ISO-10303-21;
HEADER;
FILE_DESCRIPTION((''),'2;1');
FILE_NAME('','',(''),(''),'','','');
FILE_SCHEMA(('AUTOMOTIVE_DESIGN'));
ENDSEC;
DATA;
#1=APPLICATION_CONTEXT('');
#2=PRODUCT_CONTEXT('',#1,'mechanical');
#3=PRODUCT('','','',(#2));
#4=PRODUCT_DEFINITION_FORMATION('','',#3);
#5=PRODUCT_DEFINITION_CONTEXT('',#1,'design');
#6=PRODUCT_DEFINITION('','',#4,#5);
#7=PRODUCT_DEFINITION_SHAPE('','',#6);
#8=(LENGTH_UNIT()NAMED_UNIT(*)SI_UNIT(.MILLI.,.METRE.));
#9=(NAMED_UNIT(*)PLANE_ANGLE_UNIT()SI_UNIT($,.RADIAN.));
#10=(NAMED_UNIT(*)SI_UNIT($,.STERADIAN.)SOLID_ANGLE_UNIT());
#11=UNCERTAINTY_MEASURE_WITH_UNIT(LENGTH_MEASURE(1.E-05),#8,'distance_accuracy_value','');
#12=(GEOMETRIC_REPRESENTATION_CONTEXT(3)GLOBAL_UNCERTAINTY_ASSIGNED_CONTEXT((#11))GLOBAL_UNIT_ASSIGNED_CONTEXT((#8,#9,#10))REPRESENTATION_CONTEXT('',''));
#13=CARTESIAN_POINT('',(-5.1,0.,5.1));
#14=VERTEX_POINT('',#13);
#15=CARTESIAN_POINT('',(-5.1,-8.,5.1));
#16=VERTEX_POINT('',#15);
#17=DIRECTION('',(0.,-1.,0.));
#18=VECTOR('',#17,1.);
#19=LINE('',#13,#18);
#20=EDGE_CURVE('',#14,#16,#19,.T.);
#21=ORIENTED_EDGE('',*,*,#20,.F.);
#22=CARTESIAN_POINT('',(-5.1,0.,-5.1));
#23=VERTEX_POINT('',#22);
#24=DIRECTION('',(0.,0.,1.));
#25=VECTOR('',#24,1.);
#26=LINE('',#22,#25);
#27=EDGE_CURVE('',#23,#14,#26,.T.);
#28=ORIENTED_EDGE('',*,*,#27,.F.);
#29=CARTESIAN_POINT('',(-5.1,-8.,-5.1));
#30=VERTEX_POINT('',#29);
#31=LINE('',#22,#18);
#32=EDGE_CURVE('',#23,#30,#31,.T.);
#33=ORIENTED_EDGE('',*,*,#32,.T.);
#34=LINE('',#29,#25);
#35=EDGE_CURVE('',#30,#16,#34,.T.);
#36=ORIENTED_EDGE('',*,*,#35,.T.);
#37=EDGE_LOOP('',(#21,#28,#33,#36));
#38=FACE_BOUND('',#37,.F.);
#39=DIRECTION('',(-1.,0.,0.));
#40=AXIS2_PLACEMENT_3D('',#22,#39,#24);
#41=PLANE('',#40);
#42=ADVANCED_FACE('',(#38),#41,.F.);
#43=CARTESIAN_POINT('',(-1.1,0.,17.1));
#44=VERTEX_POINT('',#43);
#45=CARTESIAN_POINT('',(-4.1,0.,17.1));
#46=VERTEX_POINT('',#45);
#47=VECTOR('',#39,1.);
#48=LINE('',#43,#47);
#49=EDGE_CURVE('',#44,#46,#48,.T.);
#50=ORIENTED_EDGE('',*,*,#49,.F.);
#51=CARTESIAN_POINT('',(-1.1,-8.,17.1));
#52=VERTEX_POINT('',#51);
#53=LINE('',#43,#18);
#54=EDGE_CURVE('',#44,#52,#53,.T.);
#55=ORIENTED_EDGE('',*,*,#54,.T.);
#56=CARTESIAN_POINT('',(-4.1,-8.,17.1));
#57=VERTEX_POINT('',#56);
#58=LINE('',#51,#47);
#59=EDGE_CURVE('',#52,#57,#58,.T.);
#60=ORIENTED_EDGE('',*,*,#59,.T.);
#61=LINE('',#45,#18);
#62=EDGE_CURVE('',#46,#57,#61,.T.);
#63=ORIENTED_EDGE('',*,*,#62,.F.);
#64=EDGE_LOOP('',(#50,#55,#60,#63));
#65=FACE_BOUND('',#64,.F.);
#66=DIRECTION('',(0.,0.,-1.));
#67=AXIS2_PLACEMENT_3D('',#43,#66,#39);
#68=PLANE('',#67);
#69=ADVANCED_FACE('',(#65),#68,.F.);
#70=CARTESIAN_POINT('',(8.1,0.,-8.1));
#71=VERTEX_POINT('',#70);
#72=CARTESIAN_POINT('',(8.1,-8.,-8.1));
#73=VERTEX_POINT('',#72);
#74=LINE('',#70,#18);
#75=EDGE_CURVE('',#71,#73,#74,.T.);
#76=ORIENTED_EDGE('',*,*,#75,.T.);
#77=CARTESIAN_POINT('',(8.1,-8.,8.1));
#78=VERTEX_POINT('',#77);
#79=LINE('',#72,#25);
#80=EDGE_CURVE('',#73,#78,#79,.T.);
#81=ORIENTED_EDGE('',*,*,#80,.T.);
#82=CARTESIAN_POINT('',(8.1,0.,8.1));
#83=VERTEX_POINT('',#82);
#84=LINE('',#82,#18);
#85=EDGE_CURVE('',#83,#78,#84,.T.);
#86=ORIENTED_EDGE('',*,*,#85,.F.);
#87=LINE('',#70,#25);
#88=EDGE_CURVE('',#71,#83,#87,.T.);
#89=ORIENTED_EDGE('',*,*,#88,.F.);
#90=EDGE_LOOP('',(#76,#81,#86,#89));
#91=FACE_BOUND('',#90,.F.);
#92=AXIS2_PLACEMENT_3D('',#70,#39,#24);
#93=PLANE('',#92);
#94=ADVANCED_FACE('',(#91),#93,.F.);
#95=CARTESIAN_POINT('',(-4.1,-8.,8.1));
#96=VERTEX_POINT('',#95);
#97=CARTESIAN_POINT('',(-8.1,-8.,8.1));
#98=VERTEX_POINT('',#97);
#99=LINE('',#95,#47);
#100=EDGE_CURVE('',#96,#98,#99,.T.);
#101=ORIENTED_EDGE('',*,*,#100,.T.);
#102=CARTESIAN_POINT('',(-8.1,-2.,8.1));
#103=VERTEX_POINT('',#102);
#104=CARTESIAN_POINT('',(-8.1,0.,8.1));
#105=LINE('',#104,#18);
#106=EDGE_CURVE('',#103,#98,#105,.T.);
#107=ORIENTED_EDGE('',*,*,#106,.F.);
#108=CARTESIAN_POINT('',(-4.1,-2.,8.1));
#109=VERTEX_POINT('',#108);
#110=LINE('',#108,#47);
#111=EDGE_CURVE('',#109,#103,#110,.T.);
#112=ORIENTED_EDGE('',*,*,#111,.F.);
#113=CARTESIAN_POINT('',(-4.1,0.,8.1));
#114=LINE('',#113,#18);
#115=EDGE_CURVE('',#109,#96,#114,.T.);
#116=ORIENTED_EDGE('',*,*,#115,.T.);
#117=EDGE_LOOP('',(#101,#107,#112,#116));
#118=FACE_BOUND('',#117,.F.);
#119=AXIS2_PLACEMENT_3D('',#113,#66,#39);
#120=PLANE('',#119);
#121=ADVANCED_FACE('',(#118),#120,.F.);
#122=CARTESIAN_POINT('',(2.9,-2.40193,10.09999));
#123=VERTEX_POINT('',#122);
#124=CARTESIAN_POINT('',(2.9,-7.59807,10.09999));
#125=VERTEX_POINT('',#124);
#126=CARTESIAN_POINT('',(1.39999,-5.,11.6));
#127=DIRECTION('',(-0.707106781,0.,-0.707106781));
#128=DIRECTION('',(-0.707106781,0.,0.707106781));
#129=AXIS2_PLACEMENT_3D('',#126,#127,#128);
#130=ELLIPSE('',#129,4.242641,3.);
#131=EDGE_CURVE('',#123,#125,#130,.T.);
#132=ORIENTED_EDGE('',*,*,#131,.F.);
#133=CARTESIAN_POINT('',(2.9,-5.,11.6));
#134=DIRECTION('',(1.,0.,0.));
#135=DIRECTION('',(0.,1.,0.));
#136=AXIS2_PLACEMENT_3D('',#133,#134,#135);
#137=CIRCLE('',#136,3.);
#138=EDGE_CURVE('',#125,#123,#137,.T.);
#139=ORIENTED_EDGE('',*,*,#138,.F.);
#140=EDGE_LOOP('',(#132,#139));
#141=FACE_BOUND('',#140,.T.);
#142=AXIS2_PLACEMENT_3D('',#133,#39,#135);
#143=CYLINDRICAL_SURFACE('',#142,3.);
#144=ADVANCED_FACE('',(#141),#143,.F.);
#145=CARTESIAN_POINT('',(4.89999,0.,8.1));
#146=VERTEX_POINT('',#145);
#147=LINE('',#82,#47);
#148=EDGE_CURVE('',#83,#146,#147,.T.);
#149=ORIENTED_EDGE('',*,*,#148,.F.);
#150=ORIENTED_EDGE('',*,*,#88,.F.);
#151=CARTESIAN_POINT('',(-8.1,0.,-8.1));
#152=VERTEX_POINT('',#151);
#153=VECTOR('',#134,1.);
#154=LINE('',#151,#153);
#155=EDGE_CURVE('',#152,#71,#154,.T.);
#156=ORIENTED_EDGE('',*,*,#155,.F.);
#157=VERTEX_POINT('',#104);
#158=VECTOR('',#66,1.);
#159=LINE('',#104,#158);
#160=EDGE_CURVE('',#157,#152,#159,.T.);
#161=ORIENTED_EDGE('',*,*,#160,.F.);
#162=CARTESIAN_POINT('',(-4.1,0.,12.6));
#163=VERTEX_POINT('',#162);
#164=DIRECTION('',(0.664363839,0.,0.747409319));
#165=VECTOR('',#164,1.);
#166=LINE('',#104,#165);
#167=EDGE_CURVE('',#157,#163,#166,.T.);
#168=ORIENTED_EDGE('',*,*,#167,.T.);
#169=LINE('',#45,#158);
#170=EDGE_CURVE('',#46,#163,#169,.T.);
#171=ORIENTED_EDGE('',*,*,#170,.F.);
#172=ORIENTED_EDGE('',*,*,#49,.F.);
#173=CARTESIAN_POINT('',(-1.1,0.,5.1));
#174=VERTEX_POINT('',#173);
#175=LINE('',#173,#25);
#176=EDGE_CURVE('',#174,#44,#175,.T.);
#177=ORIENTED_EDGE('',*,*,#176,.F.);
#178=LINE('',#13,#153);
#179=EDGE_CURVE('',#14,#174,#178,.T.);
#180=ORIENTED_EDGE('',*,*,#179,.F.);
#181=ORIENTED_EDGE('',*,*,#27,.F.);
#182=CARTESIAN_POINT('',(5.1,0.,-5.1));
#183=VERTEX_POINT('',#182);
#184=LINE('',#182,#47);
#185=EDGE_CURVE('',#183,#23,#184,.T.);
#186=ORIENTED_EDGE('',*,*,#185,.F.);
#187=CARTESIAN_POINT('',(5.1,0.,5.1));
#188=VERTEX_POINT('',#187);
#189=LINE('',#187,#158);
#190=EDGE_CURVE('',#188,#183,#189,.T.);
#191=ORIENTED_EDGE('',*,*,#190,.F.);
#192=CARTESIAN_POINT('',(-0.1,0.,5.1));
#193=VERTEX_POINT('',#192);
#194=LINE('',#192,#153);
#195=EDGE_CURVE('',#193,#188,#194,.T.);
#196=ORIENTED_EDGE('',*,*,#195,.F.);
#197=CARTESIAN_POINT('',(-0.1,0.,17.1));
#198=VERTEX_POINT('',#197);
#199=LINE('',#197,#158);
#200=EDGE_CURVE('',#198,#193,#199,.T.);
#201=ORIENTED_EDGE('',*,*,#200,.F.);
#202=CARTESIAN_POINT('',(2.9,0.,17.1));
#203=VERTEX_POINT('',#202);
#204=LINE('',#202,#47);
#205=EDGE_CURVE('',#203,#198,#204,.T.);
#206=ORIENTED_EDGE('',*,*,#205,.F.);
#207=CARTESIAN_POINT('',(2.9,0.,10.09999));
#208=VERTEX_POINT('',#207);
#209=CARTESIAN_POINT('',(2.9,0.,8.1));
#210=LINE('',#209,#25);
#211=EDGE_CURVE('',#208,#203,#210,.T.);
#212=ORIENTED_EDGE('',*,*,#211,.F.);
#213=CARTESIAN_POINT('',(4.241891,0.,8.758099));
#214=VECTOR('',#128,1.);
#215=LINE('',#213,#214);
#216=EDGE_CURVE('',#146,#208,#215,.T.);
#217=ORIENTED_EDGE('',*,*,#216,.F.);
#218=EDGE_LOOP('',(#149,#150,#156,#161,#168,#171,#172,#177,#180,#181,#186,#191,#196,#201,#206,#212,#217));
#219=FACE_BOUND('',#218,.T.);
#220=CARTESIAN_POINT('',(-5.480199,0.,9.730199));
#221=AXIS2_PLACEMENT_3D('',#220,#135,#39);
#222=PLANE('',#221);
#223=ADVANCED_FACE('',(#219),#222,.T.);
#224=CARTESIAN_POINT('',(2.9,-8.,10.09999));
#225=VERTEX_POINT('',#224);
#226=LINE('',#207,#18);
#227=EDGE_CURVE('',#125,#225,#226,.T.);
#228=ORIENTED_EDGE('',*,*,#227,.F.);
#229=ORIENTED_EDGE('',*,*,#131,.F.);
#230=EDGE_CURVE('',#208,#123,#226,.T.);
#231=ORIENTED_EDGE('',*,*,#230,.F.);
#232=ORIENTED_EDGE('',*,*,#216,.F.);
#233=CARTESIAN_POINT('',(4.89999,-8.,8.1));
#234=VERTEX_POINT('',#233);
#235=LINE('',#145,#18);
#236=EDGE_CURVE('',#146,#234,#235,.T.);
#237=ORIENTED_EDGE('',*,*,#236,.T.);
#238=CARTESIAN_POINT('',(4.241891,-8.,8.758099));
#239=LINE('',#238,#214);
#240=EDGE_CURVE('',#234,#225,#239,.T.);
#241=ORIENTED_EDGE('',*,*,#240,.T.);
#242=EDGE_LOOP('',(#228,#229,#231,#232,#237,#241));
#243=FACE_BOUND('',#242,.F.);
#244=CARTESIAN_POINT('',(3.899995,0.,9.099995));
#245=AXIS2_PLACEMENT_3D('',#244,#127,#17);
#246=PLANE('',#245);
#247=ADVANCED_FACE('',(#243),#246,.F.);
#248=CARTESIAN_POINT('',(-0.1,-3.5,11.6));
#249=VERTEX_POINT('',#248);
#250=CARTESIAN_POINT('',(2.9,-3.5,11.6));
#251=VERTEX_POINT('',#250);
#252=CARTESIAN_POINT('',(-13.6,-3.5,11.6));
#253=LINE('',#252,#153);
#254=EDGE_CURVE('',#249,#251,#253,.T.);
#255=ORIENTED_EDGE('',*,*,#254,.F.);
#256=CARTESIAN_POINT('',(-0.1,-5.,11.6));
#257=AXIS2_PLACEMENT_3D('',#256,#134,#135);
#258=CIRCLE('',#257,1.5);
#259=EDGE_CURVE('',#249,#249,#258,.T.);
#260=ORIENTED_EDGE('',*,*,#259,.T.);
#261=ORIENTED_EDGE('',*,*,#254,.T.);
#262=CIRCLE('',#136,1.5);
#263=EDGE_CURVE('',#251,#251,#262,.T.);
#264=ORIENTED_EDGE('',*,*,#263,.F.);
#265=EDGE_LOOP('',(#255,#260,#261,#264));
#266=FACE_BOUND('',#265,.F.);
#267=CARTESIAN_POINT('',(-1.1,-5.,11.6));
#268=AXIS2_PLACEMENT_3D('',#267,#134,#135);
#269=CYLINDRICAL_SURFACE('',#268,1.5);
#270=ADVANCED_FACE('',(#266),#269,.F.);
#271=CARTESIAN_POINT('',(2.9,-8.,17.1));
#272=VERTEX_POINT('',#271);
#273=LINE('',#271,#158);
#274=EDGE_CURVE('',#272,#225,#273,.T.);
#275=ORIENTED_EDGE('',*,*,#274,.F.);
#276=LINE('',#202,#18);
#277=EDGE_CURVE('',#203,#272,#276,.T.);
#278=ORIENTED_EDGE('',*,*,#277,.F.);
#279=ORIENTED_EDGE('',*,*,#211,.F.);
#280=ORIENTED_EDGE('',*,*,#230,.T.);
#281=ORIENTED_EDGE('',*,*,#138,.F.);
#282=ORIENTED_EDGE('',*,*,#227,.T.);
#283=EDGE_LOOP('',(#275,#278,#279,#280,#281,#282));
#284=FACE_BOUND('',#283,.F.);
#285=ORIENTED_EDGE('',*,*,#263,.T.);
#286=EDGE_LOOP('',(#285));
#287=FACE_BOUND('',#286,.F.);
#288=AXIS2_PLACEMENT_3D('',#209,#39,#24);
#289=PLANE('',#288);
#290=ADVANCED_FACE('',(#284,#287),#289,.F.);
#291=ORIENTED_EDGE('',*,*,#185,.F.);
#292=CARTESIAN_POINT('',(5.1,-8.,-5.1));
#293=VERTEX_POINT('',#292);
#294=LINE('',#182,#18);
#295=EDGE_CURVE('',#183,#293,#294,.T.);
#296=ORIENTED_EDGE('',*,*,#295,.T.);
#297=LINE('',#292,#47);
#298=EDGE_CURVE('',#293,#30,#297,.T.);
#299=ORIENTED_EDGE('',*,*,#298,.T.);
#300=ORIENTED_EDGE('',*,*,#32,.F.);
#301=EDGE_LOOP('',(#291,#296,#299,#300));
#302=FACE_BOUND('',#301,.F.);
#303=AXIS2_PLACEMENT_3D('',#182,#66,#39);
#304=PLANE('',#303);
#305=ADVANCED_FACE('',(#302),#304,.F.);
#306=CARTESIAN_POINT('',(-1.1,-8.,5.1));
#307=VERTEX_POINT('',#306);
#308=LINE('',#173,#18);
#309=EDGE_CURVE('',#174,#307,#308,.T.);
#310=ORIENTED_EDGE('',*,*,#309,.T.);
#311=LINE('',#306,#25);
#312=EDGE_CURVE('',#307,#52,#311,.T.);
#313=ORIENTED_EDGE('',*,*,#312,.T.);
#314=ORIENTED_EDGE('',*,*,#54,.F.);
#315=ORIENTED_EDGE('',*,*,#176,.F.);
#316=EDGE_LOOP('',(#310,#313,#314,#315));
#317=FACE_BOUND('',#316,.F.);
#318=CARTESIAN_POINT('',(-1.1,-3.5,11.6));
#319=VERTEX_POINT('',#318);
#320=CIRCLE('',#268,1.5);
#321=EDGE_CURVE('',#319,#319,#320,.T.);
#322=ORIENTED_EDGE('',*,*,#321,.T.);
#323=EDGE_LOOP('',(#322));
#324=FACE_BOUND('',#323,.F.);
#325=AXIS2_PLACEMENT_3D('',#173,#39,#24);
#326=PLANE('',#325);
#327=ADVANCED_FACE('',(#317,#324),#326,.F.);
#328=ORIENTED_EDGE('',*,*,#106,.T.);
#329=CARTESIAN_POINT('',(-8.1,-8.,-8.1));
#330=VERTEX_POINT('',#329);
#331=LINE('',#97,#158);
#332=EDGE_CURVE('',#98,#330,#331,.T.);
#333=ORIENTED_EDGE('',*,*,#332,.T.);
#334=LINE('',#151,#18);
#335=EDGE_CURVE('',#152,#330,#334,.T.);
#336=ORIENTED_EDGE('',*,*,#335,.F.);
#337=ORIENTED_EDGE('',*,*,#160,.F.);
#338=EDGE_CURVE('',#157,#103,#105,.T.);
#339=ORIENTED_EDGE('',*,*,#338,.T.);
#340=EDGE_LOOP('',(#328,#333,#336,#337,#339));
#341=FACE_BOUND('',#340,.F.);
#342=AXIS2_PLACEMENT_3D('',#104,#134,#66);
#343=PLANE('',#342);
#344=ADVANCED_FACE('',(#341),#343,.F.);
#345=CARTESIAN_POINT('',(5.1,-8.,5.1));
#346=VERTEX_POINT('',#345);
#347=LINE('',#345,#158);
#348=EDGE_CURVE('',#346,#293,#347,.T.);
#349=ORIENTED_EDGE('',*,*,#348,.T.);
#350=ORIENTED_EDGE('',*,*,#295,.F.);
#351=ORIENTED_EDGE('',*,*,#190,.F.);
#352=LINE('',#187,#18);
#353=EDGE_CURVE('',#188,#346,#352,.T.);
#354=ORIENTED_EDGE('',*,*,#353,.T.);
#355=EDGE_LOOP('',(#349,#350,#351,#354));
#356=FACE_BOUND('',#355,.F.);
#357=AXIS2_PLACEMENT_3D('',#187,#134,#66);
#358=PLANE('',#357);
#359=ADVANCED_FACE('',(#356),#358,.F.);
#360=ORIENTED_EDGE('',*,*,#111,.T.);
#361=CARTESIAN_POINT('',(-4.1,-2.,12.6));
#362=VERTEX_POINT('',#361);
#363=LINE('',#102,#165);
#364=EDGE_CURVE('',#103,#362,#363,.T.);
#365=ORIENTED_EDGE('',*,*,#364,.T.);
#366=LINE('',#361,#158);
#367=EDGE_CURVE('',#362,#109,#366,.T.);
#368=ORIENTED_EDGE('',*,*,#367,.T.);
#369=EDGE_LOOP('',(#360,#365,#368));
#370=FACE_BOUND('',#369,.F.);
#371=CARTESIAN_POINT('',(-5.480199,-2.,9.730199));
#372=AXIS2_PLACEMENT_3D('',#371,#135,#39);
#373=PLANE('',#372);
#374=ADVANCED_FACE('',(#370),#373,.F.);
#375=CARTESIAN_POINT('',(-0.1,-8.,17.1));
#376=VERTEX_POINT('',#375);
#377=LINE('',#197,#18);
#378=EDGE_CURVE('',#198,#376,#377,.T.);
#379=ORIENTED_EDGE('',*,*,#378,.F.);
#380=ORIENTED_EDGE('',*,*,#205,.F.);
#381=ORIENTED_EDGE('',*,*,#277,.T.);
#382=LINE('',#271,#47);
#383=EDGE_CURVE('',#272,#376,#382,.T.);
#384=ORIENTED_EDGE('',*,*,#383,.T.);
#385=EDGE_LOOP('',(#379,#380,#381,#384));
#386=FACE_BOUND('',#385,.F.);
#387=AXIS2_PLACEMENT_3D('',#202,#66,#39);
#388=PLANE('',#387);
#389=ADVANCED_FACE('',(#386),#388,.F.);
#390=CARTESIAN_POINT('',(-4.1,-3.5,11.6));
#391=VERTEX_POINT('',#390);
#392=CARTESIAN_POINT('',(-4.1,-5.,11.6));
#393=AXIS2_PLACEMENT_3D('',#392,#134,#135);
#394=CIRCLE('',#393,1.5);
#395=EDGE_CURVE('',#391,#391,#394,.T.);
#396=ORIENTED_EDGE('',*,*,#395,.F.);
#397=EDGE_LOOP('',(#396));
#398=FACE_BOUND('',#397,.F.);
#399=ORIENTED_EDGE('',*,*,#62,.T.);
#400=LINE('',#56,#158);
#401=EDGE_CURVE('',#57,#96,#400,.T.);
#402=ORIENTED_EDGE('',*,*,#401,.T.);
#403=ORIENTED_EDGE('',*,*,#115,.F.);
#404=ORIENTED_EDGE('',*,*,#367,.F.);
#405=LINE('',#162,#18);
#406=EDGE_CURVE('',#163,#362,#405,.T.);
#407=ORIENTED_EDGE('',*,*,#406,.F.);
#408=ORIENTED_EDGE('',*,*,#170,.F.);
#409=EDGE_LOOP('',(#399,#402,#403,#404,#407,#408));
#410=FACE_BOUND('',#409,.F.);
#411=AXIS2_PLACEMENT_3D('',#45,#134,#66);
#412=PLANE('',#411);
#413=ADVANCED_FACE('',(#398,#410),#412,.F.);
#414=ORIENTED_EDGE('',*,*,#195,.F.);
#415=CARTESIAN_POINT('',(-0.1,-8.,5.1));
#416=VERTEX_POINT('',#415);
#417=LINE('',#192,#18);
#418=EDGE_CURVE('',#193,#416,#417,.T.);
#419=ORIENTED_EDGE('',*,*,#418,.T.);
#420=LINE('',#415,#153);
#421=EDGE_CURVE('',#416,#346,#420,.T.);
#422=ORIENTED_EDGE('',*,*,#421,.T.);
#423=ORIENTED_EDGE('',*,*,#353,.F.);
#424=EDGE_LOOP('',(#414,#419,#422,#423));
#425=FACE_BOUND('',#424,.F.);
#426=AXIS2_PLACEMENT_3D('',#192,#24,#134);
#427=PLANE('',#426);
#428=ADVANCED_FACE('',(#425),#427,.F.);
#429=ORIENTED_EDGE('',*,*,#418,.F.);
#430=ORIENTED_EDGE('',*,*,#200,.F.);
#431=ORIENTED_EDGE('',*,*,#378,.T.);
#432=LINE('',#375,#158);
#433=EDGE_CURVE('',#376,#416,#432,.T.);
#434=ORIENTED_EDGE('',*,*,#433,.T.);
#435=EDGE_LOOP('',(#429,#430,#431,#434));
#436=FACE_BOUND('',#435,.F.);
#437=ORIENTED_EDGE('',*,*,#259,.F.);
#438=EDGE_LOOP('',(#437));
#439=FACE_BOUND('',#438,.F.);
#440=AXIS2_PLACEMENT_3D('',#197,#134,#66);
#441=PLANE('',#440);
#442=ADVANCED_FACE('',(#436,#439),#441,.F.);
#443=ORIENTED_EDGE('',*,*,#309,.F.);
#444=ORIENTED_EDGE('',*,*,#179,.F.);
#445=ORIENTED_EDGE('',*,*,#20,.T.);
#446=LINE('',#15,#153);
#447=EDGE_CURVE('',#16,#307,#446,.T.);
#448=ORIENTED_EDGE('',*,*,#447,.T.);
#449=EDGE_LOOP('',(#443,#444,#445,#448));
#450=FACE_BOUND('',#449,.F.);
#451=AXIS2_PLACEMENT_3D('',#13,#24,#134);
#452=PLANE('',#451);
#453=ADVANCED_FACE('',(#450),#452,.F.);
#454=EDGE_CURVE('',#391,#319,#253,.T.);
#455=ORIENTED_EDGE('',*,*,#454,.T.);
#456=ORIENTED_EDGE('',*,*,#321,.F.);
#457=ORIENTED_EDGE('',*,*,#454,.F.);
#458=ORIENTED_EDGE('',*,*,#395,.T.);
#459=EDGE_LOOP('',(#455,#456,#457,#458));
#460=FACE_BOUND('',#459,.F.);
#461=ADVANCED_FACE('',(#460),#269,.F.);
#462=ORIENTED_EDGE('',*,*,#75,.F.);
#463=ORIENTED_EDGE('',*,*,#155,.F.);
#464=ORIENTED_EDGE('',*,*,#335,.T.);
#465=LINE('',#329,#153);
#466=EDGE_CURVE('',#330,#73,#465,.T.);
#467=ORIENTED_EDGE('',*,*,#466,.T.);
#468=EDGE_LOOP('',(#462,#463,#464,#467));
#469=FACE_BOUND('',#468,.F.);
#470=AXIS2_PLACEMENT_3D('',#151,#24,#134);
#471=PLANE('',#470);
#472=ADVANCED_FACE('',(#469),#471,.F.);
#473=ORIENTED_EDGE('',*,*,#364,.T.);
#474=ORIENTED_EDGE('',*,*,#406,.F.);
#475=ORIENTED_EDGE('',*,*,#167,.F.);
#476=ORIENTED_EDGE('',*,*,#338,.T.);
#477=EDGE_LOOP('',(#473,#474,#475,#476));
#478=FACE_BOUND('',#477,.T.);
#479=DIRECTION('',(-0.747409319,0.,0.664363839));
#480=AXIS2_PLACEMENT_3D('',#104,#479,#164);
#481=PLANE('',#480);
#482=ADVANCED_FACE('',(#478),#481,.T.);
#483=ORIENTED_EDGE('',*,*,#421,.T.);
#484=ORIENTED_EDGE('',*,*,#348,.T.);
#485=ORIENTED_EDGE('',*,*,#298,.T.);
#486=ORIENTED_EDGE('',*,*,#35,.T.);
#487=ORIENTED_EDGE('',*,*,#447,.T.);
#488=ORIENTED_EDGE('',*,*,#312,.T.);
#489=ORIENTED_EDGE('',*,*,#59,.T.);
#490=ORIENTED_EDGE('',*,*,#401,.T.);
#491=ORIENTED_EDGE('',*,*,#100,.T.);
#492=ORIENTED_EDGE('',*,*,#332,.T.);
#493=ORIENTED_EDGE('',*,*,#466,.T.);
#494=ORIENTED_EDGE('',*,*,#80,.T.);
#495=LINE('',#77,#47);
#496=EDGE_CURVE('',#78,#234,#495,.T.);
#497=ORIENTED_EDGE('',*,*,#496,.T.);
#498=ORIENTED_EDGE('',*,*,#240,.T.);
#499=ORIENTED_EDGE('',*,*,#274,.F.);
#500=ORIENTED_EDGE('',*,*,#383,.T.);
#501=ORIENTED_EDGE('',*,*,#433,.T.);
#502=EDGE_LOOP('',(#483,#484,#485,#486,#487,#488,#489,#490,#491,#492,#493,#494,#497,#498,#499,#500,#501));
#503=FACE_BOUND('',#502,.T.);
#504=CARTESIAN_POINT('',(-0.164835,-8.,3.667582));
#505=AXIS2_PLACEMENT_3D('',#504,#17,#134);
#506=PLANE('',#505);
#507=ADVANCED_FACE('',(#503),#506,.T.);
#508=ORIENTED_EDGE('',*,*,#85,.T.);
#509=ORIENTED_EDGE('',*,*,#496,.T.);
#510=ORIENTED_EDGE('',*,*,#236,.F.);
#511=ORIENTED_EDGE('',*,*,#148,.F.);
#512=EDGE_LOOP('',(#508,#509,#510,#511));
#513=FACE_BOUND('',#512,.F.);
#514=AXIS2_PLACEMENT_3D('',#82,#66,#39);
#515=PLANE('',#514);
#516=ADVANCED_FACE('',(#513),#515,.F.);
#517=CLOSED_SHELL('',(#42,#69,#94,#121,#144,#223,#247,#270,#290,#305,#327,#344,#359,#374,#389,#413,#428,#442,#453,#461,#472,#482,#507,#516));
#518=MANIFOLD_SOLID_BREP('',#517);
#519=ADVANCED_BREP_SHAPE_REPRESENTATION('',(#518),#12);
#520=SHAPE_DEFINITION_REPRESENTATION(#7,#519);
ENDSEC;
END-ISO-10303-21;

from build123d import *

# Parameters (mm, degrees)
F1_DEPTH = 8
F2_R     = 1.5
F3_DEPTH = 12.5
F4_SIZE  = 1.99999
F5_R     = 3
F6_DEPTH = 4
F8_DEPTH = 2


# Not quite as in the source:
# - a fillet or chamfer is up to 0.001 mm smaller than in the source, because OpenCascade refuses the exact size


with BuildPart() as f1:
    # F0 (on Front) → F1 (new body)
    with BuildSketch(Plane.XZ):
        Polygon((5.1, 5.1), (5.1, -5.1), (-5.1, -5.1), (-5.1, 5.1), (-4.1, 5.1), (-1.1, 5.1), (-1.1, 8.1), (-1.1, 17.1), (-4.1, 17.1), (-4.1, 8.1), (-5.1, 8.1), (-8.1, 8.1), (-8.1, -8.1), (8.1, -8.1), (8.1, 8.1), (2.9, 8.1), (2.9, 17.1), (-0.1, 17.1), (-0.1, 8.1), (-0.1, 5.1), align=None)
    extrude(amount=F1_DEPTH)

    # F2 (on face) → F3 (cut, symmetric)
    with BuildSketch(Plane.YZ.offset(-1.1)):
        with Locations((-5, 11.6)):
            Circle(F2_R)
    extrude(amount=F3_DEPTH, both=True, mode=Mode.SUBTRACT)

    # F4 (size 2 in the source; OpenCascade refuses exactly that, so slightly less here)
    f4_edges = [f1.edges().sort_by_distance(p)[0] for p in [
        (2.9, -4, 8.1),
    ]]
    chamfer(f4_edges, length=F4_SIZE)

    # F5 (on face) → F6 (cut)
    with BuildSketch(Plane.YZ.offset(2.9)):
        with Locations((-5, 11.6)):
            Circle(F5_R)
    extrude(amount=F6_DEPTH, mode=Mode.SUBTRACT)

    # F7 (on face) → F8 (join)
    with BuildSketch(Plane(origin=(0, 0, 0), x_dir=(-1, 0, 0), z_dir=(0, 1, 0))):
        Polygon((4.1, 8.1), (8.1, 8.1), (4.1, 12.6), align=None)
    extrude(amount=-F8_DEPTH)


solid = f1.part
